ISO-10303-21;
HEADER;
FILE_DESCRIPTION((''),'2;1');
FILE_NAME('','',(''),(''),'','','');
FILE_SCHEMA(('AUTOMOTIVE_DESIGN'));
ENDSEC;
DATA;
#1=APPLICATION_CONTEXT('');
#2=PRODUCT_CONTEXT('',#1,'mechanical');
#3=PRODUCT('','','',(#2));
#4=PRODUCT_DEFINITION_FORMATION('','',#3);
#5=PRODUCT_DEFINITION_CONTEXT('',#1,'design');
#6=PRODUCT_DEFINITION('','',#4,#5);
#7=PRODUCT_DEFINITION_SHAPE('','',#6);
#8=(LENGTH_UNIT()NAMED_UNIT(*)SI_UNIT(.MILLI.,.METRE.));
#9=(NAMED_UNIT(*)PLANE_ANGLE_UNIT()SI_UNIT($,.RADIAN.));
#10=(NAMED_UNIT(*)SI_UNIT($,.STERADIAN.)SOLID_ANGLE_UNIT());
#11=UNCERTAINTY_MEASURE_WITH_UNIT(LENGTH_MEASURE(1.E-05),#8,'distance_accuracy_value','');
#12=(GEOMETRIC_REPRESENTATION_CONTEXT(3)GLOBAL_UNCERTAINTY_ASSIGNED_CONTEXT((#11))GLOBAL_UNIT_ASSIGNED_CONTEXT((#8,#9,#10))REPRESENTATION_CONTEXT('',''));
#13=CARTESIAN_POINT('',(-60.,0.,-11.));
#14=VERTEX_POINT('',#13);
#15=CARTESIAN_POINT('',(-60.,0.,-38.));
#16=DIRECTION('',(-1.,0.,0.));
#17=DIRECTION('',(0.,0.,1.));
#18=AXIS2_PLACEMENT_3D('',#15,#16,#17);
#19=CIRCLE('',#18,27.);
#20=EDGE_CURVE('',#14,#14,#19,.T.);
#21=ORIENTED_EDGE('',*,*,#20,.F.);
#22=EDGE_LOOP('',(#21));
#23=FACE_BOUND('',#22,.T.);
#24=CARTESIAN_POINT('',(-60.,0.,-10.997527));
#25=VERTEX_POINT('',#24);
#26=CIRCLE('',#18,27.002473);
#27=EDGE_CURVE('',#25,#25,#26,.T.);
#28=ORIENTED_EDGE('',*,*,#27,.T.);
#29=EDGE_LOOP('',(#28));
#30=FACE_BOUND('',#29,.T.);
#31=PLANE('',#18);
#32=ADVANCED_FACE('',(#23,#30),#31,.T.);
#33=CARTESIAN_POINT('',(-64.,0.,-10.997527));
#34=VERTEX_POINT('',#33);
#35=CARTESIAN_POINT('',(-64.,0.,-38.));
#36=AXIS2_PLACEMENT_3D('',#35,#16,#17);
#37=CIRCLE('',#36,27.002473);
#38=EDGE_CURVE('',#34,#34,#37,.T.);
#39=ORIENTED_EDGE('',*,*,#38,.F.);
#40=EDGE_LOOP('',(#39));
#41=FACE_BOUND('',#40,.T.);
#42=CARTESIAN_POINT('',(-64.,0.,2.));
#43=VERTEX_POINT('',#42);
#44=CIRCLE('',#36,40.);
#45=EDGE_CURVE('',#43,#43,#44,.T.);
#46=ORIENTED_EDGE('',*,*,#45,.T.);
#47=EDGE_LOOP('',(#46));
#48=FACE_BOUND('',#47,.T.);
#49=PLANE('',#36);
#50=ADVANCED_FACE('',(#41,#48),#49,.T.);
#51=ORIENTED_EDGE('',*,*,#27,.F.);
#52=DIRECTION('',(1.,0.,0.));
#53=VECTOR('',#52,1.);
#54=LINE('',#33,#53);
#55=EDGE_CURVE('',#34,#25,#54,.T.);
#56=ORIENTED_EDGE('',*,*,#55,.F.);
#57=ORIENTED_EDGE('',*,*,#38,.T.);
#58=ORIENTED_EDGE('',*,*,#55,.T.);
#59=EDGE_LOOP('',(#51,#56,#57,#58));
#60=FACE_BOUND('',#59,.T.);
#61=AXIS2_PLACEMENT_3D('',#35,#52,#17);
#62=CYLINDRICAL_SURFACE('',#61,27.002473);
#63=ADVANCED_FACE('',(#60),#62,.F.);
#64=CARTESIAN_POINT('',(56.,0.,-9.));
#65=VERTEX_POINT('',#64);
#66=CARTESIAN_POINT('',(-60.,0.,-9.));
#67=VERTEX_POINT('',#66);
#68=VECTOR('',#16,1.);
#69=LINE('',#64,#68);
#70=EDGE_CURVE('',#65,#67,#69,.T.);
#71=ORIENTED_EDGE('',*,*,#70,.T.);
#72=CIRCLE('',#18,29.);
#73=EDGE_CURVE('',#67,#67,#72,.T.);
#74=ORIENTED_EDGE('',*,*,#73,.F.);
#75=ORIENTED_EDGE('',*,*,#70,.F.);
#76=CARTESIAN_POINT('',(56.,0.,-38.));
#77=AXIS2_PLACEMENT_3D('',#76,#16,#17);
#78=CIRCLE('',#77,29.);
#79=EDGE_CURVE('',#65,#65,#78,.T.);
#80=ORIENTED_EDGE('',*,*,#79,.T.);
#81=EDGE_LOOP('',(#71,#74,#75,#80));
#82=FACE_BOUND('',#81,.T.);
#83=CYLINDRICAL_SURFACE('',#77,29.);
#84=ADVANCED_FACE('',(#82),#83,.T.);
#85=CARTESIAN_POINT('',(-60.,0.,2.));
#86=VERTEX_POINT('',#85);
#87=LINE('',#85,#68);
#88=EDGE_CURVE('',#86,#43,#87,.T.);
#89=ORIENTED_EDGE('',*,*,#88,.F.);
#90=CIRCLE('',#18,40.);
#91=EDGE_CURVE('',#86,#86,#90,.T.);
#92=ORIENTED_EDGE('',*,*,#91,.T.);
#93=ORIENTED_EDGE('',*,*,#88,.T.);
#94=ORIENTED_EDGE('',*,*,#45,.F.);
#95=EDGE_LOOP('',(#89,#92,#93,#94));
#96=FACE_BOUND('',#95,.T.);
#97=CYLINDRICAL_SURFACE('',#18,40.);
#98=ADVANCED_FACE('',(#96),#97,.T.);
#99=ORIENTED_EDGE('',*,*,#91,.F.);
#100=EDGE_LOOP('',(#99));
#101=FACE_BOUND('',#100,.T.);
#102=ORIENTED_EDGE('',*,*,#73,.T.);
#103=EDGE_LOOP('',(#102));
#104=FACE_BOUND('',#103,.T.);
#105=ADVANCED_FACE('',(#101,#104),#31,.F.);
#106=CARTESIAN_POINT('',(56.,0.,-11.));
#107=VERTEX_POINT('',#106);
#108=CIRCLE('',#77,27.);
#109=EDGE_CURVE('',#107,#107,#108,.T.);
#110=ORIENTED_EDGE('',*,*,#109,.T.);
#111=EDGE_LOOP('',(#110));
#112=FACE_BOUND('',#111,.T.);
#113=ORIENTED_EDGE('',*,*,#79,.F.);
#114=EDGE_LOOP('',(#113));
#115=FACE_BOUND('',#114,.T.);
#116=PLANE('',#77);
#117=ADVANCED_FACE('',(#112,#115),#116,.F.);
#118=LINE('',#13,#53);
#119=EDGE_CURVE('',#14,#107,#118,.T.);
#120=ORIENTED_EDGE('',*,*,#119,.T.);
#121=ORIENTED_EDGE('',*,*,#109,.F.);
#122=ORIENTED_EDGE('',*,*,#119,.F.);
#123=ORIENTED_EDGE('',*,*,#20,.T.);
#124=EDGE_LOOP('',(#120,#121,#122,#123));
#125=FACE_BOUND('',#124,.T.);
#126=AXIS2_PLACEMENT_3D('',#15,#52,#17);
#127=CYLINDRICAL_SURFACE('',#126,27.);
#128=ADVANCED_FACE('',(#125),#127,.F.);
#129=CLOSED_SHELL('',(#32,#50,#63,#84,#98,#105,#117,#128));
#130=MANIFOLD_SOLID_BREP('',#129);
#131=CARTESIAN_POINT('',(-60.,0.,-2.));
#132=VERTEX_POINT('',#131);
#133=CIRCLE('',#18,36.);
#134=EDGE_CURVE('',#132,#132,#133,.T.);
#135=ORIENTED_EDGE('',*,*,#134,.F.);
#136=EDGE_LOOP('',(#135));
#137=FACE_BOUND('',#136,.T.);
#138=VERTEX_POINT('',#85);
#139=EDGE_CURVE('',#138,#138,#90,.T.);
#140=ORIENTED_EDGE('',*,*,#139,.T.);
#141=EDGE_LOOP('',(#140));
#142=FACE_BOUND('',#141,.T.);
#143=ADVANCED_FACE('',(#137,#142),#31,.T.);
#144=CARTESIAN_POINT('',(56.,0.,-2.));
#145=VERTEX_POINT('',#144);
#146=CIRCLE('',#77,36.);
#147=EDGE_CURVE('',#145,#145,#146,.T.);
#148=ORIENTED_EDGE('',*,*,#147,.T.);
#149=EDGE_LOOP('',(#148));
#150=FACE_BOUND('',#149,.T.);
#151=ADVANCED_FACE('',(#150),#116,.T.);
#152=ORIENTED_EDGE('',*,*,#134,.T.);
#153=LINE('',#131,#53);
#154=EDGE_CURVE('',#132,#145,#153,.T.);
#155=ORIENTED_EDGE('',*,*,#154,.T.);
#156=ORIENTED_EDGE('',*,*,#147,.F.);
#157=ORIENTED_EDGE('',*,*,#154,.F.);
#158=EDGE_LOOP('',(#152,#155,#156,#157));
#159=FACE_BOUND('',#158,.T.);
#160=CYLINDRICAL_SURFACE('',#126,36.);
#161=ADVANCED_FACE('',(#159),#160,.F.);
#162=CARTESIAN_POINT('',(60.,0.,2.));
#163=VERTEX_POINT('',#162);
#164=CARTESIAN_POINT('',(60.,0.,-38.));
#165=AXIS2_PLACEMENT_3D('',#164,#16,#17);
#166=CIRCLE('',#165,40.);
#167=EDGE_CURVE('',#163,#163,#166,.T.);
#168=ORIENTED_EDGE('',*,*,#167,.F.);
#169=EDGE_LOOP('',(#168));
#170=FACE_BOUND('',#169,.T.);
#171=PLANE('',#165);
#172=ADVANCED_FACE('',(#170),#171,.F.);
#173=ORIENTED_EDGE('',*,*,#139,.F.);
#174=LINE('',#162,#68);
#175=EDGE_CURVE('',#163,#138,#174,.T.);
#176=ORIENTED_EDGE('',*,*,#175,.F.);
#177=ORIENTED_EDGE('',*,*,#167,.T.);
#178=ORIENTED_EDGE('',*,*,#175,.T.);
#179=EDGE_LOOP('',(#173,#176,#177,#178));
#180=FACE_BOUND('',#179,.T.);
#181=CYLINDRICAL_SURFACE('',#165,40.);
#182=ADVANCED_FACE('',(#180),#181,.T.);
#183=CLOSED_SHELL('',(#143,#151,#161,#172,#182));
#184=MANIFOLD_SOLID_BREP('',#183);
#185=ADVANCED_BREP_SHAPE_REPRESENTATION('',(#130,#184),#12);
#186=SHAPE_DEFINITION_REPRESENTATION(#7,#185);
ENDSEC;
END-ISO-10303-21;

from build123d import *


# Not quite as in the source:
# - a feature names something its author has since deleted; it is built from what else it names


with BuildPart() as f1:
    # F0 (on Front) → F1 (revolve)
    with BuildSketch(Plane.XZ):
        Polygon((56, -2), (60, -2), (60, 2), (-60, 2), (-60, -2), align=None)
        Polygon((60, -38), (60, -2), (56, -2), (56, -9), (56, -11), (56, -38), align=None)
    revolve(axis=Axis((58, 0, -38), (-1, 0, 0)))


with BuildPart() as f2:
    # F0 (on Front) → F2 (revolve)
    with BuildSketch(Plane.XZ):
        Polygon((56, -11), (56, -9), (-60, -9), (-60, -10.997527279), (-60, -11), align=None)
        Polygon((-60, -9), (-60, -2), (-60, 2), (-64, 2), (-64, -10.997527279), (-60, -10.997527279), align=None)
    revolve(axis=Axis((58, 0, -38), (-1, 0, 0)))


solid = Compound([f1.part, f2.part])
